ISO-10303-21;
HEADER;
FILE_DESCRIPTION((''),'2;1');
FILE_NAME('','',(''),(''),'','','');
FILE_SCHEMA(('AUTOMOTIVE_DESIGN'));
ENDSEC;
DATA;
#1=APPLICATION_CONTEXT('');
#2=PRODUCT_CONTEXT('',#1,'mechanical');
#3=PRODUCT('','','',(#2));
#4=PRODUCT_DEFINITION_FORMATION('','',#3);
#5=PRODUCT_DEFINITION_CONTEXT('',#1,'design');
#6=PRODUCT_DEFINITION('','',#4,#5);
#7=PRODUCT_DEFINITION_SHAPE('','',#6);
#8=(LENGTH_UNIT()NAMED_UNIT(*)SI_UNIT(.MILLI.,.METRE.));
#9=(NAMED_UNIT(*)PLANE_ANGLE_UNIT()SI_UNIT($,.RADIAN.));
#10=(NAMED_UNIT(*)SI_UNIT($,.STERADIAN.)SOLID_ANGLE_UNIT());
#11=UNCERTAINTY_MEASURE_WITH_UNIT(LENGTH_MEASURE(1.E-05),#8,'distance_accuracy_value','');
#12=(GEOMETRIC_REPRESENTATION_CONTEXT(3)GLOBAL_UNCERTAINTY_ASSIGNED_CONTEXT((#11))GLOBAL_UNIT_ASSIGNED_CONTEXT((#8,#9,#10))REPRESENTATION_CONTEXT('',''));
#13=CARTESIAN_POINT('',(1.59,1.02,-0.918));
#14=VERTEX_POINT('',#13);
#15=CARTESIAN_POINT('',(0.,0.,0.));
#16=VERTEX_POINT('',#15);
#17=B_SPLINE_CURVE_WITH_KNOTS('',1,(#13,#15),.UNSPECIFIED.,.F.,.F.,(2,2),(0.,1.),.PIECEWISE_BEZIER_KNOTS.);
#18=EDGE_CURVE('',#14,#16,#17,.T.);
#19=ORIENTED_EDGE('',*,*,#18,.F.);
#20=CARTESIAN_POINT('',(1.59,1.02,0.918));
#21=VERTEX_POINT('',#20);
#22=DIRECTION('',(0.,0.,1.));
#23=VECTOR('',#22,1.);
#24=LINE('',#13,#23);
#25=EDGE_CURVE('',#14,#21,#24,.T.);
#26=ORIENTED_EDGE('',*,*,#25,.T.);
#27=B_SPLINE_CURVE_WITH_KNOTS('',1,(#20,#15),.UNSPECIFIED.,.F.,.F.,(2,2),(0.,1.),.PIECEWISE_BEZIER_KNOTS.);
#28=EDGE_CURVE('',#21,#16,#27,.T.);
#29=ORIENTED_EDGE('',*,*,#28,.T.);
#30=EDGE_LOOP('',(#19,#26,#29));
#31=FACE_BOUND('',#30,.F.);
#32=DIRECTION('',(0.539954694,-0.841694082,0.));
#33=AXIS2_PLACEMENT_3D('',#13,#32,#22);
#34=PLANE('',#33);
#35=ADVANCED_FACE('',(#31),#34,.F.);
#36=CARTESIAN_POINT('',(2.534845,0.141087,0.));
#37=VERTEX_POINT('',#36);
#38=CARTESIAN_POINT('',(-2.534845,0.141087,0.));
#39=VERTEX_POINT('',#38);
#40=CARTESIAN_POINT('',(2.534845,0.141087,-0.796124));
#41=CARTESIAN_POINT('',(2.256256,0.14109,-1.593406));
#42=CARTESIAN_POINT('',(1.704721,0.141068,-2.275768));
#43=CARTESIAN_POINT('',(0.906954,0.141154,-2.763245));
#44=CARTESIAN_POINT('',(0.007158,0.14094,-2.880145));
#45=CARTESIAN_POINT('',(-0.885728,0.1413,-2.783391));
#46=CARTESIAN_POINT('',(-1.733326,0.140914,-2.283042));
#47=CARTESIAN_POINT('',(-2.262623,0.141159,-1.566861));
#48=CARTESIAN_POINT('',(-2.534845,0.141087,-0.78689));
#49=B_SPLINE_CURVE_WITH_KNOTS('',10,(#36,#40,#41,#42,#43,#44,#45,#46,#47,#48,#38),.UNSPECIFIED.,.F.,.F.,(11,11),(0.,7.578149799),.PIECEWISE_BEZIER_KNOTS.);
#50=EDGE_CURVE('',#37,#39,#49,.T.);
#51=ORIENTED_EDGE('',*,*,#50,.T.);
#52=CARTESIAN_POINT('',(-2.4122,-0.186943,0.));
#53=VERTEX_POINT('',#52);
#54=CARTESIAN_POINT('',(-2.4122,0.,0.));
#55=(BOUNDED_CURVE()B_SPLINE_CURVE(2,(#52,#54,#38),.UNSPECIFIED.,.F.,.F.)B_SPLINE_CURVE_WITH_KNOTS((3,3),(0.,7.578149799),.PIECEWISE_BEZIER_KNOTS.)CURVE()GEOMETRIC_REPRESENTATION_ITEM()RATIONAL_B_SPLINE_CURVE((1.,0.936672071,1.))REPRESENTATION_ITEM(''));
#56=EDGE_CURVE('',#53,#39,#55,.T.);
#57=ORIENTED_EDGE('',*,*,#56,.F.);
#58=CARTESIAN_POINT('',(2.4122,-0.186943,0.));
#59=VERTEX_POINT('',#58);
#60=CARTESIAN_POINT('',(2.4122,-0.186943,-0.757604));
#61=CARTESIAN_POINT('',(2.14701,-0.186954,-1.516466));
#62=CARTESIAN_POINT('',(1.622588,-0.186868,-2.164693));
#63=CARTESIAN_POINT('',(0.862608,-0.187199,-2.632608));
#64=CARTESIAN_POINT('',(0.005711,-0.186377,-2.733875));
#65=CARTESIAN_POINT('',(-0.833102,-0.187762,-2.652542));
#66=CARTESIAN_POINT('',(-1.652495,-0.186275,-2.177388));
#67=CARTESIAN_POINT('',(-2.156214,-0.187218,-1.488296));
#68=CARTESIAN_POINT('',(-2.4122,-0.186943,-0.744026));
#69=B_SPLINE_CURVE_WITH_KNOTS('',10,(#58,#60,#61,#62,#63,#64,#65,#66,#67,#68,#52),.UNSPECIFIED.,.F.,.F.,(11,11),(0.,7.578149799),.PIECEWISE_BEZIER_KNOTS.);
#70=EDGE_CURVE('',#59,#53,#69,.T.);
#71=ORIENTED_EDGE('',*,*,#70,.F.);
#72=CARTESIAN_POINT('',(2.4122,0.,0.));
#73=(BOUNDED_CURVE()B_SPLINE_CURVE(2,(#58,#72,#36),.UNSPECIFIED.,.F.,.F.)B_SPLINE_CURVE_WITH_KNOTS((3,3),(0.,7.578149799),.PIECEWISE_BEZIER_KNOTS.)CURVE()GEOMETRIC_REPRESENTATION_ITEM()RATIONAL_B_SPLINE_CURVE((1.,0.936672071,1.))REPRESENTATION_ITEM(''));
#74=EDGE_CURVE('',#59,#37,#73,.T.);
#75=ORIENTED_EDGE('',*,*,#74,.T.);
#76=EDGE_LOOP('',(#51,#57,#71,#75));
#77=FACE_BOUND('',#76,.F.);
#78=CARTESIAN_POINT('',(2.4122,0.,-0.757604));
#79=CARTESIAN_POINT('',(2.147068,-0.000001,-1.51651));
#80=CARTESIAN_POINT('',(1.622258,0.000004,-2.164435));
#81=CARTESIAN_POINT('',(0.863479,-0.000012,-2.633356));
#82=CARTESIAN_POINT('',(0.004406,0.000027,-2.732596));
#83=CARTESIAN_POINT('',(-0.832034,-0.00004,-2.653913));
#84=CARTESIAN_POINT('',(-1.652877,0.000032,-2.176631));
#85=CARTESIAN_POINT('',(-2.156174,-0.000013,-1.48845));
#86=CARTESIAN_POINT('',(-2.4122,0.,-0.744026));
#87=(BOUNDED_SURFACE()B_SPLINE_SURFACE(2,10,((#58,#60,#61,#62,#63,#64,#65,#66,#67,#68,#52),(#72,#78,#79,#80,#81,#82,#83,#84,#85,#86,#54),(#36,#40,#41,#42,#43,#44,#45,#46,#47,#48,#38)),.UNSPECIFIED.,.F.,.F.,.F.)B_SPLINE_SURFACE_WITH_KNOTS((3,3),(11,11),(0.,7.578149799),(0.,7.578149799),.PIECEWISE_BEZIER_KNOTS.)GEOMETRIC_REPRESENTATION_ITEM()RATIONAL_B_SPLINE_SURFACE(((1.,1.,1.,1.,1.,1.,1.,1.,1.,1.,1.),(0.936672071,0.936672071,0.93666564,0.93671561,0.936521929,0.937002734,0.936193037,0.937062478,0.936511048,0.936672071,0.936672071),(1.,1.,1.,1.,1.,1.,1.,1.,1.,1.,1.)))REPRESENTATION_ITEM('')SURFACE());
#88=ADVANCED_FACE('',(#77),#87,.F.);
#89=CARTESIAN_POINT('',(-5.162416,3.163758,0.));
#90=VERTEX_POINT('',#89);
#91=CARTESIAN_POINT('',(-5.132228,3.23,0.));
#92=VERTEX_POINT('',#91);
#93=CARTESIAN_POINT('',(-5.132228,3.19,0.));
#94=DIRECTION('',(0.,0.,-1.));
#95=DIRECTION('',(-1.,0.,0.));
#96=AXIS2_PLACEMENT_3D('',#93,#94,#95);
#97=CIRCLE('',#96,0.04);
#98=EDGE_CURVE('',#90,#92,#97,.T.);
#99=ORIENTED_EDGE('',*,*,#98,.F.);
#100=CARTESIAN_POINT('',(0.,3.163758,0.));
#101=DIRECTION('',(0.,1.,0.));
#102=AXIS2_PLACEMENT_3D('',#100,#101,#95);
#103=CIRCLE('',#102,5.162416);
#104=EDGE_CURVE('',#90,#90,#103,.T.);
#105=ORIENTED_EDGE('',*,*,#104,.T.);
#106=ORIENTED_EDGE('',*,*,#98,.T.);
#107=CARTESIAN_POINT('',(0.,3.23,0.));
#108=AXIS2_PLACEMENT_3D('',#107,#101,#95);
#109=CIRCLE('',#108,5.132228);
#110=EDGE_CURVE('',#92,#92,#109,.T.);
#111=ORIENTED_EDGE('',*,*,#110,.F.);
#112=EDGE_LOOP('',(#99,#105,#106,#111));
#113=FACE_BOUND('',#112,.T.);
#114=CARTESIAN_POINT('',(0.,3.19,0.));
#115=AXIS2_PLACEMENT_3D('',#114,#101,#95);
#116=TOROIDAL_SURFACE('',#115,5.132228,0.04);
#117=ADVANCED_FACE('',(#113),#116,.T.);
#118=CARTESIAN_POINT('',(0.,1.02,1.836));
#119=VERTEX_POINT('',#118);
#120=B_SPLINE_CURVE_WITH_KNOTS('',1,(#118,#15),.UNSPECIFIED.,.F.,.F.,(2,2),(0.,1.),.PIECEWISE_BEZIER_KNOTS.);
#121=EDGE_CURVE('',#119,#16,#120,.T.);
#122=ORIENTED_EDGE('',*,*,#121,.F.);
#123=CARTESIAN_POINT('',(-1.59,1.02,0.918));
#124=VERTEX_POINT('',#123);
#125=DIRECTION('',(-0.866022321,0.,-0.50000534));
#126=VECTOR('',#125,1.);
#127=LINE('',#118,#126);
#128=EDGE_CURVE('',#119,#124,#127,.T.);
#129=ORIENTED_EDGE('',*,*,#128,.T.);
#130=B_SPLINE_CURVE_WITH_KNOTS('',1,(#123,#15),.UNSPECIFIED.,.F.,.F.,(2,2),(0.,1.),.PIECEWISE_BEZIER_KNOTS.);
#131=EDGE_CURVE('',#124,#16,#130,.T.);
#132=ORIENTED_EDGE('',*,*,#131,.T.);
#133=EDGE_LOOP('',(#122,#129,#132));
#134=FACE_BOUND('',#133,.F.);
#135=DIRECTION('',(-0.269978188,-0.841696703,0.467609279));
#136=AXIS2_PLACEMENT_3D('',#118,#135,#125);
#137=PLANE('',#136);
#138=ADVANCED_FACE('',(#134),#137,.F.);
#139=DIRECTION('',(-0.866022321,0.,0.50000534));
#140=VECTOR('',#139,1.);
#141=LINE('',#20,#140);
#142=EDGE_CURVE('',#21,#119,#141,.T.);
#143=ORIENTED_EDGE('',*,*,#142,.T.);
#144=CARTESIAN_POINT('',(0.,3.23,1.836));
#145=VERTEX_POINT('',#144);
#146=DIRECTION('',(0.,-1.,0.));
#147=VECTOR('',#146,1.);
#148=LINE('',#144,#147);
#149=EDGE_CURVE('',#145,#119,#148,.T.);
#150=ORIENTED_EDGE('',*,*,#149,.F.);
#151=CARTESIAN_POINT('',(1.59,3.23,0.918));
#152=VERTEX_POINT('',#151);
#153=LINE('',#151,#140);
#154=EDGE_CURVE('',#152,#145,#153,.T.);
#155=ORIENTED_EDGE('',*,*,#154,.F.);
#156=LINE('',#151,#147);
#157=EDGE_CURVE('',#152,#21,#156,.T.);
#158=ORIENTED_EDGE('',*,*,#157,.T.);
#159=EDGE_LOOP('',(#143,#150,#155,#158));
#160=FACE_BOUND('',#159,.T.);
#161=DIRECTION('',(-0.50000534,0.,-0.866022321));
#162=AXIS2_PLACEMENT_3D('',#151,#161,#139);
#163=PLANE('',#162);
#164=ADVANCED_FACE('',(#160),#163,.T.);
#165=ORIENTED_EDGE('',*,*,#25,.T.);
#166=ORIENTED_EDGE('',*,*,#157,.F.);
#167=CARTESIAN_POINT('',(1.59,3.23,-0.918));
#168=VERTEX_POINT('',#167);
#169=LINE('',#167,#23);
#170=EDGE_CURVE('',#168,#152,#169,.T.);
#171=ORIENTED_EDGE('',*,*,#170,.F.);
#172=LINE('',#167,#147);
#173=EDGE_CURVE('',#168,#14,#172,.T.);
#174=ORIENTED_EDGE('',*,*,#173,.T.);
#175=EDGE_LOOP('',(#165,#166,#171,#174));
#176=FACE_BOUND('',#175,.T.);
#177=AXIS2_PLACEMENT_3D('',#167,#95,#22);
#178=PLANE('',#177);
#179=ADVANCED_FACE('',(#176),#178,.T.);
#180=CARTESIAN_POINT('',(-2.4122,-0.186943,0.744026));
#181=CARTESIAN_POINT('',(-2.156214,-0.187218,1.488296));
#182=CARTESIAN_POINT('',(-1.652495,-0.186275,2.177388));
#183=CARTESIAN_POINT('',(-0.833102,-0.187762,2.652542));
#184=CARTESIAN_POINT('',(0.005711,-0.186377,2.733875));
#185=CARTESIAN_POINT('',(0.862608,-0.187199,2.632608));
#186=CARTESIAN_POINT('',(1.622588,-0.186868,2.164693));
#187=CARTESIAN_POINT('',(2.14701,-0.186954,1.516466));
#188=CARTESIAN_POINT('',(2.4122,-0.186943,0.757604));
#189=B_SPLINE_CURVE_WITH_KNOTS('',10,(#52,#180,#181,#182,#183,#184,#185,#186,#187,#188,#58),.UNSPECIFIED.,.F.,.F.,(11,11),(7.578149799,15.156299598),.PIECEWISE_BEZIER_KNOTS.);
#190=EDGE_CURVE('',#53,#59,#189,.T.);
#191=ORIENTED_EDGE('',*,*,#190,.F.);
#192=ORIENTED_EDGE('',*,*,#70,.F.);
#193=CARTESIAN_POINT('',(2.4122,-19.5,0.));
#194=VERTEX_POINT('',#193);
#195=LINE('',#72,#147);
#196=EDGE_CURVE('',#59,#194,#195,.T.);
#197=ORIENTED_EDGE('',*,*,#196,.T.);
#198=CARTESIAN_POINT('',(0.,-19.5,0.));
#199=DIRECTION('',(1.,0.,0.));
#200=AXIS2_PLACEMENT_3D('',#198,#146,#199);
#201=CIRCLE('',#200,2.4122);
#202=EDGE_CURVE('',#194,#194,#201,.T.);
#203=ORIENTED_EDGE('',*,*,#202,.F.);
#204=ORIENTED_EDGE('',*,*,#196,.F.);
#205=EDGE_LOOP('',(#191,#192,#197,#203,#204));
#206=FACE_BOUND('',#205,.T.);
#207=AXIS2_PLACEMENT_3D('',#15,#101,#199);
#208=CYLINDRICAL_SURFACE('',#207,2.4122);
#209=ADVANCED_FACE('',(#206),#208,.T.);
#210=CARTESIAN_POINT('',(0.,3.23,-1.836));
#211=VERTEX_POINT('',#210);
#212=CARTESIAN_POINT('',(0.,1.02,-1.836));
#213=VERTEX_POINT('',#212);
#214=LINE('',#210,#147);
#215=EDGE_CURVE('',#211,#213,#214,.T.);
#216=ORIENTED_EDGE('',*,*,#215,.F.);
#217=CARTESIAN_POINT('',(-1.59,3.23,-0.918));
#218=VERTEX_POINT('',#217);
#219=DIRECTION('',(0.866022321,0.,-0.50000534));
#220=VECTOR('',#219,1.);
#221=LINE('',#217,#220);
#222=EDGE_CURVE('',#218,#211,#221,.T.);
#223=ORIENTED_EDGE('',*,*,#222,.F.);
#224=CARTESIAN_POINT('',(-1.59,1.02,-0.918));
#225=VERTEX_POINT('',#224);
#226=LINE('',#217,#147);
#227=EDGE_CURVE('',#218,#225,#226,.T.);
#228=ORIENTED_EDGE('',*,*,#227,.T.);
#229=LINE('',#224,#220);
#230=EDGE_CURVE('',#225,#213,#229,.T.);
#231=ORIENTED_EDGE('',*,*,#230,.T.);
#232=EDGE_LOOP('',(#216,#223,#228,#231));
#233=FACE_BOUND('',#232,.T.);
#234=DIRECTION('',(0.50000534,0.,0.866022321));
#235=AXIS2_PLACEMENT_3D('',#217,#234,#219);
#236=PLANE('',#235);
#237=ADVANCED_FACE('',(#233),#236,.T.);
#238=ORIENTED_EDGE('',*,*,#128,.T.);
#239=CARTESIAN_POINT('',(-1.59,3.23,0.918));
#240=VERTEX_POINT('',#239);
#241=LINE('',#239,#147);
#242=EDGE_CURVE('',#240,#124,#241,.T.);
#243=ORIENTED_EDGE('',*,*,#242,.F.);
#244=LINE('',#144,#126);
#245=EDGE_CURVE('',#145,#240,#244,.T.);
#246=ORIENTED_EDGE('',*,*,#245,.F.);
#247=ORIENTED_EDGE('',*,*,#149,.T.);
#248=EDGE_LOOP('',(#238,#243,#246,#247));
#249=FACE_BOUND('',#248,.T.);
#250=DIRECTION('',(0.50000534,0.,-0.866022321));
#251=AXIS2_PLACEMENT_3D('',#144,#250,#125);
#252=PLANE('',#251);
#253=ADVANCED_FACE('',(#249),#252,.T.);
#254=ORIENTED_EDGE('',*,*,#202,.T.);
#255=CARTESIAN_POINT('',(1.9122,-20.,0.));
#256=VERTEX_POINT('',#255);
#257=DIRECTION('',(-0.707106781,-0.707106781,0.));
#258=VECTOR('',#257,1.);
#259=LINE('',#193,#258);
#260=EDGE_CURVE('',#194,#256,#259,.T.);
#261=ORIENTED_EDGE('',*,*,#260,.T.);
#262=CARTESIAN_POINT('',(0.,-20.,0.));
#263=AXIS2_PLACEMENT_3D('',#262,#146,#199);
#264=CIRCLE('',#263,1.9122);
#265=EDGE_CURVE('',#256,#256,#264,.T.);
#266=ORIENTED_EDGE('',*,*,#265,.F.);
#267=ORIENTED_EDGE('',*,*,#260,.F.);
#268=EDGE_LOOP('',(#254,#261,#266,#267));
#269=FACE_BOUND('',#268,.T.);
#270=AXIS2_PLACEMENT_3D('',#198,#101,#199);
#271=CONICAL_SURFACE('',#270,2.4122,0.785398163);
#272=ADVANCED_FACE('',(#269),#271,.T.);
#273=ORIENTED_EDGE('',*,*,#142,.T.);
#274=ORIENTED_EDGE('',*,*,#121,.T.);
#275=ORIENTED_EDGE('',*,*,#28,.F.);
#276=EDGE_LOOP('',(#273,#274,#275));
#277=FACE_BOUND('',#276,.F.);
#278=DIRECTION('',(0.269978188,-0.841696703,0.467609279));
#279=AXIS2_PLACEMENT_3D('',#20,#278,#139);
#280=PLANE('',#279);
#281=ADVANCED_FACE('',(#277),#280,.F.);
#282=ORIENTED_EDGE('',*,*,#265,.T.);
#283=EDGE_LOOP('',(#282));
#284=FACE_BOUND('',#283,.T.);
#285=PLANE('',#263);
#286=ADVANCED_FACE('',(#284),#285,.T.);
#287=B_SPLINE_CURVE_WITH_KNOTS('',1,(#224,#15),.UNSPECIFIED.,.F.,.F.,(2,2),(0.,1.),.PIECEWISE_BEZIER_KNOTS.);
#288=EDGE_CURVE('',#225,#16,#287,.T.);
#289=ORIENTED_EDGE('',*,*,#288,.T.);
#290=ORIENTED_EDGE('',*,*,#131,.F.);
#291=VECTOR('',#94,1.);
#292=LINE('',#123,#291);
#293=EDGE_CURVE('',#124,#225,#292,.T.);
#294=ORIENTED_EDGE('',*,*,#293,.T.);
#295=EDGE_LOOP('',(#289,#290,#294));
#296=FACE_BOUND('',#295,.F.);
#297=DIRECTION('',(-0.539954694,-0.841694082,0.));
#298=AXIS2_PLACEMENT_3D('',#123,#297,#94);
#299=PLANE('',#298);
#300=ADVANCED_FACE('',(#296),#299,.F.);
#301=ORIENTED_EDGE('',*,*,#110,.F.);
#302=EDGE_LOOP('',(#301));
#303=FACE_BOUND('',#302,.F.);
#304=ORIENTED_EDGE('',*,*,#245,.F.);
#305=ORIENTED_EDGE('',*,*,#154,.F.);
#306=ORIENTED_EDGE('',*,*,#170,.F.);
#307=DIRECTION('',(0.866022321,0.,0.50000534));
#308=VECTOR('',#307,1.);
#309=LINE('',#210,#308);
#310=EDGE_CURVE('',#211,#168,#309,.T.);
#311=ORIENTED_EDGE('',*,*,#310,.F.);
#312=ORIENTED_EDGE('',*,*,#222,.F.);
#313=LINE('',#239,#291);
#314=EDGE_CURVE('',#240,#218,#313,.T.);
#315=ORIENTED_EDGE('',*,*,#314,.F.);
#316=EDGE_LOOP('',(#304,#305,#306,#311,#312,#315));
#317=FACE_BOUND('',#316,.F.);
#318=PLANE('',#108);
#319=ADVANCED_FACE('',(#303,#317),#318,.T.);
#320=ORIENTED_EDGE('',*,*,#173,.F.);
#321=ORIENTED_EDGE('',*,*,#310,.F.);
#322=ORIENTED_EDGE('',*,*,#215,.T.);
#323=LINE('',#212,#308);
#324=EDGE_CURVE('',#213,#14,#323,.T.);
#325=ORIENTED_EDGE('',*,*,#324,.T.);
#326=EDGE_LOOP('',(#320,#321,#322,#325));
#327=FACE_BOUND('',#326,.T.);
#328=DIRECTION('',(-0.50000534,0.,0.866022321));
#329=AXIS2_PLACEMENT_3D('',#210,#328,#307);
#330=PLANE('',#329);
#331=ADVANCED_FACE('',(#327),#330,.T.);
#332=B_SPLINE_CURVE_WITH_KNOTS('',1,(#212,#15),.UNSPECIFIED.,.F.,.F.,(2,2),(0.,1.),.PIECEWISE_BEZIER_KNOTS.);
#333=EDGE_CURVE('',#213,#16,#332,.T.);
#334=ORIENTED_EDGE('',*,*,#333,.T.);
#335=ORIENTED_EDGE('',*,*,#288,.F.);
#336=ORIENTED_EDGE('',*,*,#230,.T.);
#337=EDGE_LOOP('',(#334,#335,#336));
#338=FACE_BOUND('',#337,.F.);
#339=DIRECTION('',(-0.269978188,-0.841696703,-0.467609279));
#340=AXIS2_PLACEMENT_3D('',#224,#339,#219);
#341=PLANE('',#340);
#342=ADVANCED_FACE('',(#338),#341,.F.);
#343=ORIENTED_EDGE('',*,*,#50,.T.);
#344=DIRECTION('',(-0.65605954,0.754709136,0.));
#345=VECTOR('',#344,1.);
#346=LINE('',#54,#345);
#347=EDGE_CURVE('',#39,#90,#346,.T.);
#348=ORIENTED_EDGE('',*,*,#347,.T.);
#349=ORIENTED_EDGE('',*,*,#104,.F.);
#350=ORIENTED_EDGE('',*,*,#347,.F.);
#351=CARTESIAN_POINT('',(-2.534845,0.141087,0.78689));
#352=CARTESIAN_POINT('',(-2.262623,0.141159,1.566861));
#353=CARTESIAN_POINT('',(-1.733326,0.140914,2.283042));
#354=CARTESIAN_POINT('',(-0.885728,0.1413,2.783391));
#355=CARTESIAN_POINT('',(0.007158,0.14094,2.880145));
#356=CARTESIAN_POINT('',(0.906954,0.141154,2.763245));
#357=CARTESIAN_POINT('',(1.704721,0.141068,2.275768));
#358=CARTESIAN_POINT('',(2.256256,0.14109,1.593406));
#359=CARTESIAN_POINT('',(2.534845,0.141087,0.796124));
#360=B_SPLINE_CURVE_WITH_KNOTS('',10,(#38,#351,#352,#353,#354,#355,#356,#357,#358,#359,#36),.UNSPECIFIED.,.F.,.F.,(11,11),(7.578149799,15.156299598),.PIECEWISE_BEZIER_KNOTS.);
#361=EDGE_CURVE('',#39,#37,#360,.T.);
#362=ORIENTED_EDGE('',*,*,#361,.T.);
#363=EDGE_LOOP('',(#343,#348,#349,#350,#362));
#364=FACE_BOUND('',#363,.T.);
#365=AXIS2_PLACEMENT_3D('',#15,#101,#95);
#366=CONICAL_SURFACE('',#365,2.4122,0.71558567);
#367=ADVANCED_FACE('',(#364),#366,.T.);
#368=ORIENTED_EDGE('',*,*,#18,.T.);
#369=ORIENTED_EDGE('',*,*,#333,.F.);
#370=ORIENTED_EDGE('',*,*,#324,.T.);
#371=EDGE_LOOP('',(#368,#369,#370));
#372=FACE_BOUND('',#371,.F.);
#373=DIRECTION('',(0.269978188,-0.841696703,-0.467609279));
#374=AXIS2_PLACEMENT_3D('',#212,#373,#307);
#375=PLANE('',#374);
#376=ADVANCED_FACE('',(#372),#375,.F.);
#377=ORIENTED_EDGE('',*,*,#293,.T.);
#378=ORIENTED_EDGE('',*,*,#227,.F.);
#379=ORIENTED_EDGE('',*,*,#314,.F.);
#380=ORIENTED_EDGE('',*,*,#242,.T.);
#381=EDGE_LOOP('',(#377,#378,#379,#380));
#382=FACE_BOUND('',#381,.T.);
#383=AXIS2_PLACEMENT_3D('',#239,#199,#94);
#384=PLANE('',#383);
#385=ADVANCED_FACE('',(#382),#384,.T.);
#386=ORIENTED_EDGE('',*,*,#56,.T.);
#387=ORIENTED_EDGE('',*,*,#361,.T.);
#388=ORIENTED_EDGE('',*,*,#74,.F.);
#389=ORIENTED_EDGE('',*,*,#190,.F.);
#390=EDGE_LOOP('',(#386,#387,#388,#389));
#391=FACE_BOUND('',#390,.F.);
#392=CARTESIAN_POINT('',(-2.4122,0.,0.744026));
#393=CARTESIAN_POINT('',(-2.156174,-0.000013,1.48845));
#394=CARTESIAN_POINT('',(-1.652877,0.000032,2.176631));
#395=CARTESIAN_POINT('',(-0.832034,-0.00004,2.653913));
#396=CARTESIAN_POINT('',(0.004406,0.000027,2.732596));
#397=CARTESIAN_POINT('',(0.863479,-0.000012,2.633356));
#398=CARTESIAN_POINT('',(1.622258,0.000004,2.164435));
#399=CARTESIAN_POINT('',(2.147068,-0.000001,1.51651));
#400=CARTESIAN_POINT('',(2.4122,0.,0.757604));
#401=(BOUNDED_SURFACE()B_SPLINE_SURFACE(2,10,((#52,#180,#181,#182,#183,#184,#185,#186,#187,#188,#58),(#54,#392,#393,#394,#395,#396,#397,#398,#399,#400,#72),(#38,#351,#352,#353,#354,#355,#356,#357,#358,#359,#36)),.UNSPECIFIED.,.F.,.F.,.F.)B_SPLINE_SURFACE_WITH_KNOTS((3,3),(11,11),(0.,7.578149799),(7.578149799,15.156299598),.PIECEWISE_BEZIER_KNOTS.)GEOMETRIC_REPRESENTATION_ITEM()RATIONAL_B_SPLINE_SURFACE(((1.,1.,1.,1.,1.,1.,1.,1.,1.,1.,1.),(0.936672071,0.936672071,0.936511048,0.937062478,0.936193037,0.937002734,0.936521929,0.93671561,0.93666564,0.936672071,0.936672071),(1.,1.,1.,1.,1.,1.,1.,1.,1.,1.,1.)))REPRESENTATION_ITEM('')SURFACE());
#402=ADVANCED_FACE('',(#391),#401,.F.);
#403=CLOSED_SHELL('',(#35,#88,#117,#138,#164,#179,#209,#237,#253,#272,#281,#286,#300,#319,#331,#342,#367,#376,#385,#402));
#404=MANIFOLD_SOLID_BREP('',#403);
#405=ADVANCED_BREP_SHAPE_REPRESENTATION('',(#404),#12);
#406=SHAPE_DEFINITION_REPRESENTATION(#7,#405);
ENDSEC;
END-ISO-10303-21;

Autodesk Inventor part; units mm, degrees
ref_plane "YZ Plane" through (0, 0, 0) normal (1, 0, 0) x (0, 1, 0)
ref_plane "XZ Plane" through (0, 0, 0) normal (0, 1, 0) x (-1, 0, 0)
ref_plane "XY Plane" through (0, 0, 0) normal (0, 0, 1) x (1, 0, 0)
sketch "Sketch1" plane through (0, 0, 0) normal (0, 0, 1) x (1, 0, 0)
  line L0 (0, 0) -> (0, 3.23)
  line L1 (0, 3.23) -> (-5.22, 3.23)
  line L2 (-5.22, 3.23) -> (-5.22, 7.9668) construction
  line L3 (-2.4122, 0) -> (-5.22, 3.23)
  line L4 (0, 0) -> (-2.4122, 0)
  line L5 (-5.22, 3.23) -> (-8.3852, 6.8711) construction
  line L6 (-4.6965, 2.6278) -> (0, 2.6278) construction
  dimension "d0" = 3.23
  dimension "d3" = 41
  dimension "d23" = 5.22
  dimension "d25" = 4.6965
revolve "Revolution1" add sketch "Sketch1" angle 360 about axis through (0, 0, 0) along (0, 1, 0)
sketch "Sketch2" plane through (0, 0, 0) normal (0, -1, 0) x (1, 0, 0)
  circle A0 centre (0, 0) radius 2.4122 projected
  dimension "d22" = 4.8244
extrude "Extrusion1" add sketch "Sketch2" along normal blind 20
sketch "Sketch3" plane through (0, 3.23, 0) normal (0, 1, 0) x (1, 0, 0)
  line L0 (0, -1.836) -> (-1.59, -0.918)
  line L1 (-1.59, -0.918) -> (-1.59, 0.918)
  line L2 (-1.59, 0.918) -> (0, 1.836)
  line L3 (0, 1.836) -> (1.59, 0.918)
  line L4 (1.59, 0.918) -> (1.59, -0.918)
  line L5 (1.59, -0.918) -> (0, -1.836)
  point P0 (0, 0)
  point P1 (0, 0)
  dimension "d8" = 3.18
extrude "Extrusion2" cut sketch "Sketch3" against normal blind 2.21
sketch "Sketch4" plane through (0, 0, 0) normal (0, 0, 1) x (1, 0, 0)
  line L0 (1.59, 1.02) -> (0, 0)
sketch "Sketch5" plane through (0, 1.02, 0) normal (0, 1, 0) x (1, 0, 0)
  line L0 (0, -1.836) -> (-1.59, -0.918)
  line L1 (1.59, -0.918) -> (0, -1.836)
  line L2 (1.59, 0.918) -> (1.59, -0.918)
  line L3 (0, 1.836) -> (1.59, 0.918)
  line L4 (-1.59, 0.918) -> (0, 1.836)
  line L5 (-1.59, -0.918) -> (-1.59, 0.918)
  point P0 (0, 0)
sketch "Sketch6" plane through (0, 0, 0) normal (0, 1, 0) x (-1, 0, 0)
  point P0 (0, 0)
  point P1 (0, 0)
sketch "Sketch7" plane through (0, 0, 0) normal (1, 0, 0) x (0, 1, 0)
  line L0 (1.02, -1.836) -> (0, 0)
loft "Loft1" cut section 1 edges at (-0.795, 1.02, 1.377) (0.795, 1.02, 1.377) (1.59, 1.02, 0) (0.795, 1.02, -1.377) (-0.795, 1.02, -1.377) (-1.59, 1.02, 0) section 2 point at (0, 0, 0)
chamfer "Chamfer1" distance 0.5 angle 45 1 edges at (-2.4122, -20, 0)
thread "Thread1" size "10-32 UNF" class "2A" standard "ANSI Unified Screw Threads" length 14
fillet "Fillet1" radius 0.5 2 edges at (0, 0, -2.4122) (0, 0, 2.4122)
fillet "Fillet2" radius 0.04 1 edges at (5.22, 3.23, 0)
properties part number "CountersunkBolt" material "Steel, Carbon"
